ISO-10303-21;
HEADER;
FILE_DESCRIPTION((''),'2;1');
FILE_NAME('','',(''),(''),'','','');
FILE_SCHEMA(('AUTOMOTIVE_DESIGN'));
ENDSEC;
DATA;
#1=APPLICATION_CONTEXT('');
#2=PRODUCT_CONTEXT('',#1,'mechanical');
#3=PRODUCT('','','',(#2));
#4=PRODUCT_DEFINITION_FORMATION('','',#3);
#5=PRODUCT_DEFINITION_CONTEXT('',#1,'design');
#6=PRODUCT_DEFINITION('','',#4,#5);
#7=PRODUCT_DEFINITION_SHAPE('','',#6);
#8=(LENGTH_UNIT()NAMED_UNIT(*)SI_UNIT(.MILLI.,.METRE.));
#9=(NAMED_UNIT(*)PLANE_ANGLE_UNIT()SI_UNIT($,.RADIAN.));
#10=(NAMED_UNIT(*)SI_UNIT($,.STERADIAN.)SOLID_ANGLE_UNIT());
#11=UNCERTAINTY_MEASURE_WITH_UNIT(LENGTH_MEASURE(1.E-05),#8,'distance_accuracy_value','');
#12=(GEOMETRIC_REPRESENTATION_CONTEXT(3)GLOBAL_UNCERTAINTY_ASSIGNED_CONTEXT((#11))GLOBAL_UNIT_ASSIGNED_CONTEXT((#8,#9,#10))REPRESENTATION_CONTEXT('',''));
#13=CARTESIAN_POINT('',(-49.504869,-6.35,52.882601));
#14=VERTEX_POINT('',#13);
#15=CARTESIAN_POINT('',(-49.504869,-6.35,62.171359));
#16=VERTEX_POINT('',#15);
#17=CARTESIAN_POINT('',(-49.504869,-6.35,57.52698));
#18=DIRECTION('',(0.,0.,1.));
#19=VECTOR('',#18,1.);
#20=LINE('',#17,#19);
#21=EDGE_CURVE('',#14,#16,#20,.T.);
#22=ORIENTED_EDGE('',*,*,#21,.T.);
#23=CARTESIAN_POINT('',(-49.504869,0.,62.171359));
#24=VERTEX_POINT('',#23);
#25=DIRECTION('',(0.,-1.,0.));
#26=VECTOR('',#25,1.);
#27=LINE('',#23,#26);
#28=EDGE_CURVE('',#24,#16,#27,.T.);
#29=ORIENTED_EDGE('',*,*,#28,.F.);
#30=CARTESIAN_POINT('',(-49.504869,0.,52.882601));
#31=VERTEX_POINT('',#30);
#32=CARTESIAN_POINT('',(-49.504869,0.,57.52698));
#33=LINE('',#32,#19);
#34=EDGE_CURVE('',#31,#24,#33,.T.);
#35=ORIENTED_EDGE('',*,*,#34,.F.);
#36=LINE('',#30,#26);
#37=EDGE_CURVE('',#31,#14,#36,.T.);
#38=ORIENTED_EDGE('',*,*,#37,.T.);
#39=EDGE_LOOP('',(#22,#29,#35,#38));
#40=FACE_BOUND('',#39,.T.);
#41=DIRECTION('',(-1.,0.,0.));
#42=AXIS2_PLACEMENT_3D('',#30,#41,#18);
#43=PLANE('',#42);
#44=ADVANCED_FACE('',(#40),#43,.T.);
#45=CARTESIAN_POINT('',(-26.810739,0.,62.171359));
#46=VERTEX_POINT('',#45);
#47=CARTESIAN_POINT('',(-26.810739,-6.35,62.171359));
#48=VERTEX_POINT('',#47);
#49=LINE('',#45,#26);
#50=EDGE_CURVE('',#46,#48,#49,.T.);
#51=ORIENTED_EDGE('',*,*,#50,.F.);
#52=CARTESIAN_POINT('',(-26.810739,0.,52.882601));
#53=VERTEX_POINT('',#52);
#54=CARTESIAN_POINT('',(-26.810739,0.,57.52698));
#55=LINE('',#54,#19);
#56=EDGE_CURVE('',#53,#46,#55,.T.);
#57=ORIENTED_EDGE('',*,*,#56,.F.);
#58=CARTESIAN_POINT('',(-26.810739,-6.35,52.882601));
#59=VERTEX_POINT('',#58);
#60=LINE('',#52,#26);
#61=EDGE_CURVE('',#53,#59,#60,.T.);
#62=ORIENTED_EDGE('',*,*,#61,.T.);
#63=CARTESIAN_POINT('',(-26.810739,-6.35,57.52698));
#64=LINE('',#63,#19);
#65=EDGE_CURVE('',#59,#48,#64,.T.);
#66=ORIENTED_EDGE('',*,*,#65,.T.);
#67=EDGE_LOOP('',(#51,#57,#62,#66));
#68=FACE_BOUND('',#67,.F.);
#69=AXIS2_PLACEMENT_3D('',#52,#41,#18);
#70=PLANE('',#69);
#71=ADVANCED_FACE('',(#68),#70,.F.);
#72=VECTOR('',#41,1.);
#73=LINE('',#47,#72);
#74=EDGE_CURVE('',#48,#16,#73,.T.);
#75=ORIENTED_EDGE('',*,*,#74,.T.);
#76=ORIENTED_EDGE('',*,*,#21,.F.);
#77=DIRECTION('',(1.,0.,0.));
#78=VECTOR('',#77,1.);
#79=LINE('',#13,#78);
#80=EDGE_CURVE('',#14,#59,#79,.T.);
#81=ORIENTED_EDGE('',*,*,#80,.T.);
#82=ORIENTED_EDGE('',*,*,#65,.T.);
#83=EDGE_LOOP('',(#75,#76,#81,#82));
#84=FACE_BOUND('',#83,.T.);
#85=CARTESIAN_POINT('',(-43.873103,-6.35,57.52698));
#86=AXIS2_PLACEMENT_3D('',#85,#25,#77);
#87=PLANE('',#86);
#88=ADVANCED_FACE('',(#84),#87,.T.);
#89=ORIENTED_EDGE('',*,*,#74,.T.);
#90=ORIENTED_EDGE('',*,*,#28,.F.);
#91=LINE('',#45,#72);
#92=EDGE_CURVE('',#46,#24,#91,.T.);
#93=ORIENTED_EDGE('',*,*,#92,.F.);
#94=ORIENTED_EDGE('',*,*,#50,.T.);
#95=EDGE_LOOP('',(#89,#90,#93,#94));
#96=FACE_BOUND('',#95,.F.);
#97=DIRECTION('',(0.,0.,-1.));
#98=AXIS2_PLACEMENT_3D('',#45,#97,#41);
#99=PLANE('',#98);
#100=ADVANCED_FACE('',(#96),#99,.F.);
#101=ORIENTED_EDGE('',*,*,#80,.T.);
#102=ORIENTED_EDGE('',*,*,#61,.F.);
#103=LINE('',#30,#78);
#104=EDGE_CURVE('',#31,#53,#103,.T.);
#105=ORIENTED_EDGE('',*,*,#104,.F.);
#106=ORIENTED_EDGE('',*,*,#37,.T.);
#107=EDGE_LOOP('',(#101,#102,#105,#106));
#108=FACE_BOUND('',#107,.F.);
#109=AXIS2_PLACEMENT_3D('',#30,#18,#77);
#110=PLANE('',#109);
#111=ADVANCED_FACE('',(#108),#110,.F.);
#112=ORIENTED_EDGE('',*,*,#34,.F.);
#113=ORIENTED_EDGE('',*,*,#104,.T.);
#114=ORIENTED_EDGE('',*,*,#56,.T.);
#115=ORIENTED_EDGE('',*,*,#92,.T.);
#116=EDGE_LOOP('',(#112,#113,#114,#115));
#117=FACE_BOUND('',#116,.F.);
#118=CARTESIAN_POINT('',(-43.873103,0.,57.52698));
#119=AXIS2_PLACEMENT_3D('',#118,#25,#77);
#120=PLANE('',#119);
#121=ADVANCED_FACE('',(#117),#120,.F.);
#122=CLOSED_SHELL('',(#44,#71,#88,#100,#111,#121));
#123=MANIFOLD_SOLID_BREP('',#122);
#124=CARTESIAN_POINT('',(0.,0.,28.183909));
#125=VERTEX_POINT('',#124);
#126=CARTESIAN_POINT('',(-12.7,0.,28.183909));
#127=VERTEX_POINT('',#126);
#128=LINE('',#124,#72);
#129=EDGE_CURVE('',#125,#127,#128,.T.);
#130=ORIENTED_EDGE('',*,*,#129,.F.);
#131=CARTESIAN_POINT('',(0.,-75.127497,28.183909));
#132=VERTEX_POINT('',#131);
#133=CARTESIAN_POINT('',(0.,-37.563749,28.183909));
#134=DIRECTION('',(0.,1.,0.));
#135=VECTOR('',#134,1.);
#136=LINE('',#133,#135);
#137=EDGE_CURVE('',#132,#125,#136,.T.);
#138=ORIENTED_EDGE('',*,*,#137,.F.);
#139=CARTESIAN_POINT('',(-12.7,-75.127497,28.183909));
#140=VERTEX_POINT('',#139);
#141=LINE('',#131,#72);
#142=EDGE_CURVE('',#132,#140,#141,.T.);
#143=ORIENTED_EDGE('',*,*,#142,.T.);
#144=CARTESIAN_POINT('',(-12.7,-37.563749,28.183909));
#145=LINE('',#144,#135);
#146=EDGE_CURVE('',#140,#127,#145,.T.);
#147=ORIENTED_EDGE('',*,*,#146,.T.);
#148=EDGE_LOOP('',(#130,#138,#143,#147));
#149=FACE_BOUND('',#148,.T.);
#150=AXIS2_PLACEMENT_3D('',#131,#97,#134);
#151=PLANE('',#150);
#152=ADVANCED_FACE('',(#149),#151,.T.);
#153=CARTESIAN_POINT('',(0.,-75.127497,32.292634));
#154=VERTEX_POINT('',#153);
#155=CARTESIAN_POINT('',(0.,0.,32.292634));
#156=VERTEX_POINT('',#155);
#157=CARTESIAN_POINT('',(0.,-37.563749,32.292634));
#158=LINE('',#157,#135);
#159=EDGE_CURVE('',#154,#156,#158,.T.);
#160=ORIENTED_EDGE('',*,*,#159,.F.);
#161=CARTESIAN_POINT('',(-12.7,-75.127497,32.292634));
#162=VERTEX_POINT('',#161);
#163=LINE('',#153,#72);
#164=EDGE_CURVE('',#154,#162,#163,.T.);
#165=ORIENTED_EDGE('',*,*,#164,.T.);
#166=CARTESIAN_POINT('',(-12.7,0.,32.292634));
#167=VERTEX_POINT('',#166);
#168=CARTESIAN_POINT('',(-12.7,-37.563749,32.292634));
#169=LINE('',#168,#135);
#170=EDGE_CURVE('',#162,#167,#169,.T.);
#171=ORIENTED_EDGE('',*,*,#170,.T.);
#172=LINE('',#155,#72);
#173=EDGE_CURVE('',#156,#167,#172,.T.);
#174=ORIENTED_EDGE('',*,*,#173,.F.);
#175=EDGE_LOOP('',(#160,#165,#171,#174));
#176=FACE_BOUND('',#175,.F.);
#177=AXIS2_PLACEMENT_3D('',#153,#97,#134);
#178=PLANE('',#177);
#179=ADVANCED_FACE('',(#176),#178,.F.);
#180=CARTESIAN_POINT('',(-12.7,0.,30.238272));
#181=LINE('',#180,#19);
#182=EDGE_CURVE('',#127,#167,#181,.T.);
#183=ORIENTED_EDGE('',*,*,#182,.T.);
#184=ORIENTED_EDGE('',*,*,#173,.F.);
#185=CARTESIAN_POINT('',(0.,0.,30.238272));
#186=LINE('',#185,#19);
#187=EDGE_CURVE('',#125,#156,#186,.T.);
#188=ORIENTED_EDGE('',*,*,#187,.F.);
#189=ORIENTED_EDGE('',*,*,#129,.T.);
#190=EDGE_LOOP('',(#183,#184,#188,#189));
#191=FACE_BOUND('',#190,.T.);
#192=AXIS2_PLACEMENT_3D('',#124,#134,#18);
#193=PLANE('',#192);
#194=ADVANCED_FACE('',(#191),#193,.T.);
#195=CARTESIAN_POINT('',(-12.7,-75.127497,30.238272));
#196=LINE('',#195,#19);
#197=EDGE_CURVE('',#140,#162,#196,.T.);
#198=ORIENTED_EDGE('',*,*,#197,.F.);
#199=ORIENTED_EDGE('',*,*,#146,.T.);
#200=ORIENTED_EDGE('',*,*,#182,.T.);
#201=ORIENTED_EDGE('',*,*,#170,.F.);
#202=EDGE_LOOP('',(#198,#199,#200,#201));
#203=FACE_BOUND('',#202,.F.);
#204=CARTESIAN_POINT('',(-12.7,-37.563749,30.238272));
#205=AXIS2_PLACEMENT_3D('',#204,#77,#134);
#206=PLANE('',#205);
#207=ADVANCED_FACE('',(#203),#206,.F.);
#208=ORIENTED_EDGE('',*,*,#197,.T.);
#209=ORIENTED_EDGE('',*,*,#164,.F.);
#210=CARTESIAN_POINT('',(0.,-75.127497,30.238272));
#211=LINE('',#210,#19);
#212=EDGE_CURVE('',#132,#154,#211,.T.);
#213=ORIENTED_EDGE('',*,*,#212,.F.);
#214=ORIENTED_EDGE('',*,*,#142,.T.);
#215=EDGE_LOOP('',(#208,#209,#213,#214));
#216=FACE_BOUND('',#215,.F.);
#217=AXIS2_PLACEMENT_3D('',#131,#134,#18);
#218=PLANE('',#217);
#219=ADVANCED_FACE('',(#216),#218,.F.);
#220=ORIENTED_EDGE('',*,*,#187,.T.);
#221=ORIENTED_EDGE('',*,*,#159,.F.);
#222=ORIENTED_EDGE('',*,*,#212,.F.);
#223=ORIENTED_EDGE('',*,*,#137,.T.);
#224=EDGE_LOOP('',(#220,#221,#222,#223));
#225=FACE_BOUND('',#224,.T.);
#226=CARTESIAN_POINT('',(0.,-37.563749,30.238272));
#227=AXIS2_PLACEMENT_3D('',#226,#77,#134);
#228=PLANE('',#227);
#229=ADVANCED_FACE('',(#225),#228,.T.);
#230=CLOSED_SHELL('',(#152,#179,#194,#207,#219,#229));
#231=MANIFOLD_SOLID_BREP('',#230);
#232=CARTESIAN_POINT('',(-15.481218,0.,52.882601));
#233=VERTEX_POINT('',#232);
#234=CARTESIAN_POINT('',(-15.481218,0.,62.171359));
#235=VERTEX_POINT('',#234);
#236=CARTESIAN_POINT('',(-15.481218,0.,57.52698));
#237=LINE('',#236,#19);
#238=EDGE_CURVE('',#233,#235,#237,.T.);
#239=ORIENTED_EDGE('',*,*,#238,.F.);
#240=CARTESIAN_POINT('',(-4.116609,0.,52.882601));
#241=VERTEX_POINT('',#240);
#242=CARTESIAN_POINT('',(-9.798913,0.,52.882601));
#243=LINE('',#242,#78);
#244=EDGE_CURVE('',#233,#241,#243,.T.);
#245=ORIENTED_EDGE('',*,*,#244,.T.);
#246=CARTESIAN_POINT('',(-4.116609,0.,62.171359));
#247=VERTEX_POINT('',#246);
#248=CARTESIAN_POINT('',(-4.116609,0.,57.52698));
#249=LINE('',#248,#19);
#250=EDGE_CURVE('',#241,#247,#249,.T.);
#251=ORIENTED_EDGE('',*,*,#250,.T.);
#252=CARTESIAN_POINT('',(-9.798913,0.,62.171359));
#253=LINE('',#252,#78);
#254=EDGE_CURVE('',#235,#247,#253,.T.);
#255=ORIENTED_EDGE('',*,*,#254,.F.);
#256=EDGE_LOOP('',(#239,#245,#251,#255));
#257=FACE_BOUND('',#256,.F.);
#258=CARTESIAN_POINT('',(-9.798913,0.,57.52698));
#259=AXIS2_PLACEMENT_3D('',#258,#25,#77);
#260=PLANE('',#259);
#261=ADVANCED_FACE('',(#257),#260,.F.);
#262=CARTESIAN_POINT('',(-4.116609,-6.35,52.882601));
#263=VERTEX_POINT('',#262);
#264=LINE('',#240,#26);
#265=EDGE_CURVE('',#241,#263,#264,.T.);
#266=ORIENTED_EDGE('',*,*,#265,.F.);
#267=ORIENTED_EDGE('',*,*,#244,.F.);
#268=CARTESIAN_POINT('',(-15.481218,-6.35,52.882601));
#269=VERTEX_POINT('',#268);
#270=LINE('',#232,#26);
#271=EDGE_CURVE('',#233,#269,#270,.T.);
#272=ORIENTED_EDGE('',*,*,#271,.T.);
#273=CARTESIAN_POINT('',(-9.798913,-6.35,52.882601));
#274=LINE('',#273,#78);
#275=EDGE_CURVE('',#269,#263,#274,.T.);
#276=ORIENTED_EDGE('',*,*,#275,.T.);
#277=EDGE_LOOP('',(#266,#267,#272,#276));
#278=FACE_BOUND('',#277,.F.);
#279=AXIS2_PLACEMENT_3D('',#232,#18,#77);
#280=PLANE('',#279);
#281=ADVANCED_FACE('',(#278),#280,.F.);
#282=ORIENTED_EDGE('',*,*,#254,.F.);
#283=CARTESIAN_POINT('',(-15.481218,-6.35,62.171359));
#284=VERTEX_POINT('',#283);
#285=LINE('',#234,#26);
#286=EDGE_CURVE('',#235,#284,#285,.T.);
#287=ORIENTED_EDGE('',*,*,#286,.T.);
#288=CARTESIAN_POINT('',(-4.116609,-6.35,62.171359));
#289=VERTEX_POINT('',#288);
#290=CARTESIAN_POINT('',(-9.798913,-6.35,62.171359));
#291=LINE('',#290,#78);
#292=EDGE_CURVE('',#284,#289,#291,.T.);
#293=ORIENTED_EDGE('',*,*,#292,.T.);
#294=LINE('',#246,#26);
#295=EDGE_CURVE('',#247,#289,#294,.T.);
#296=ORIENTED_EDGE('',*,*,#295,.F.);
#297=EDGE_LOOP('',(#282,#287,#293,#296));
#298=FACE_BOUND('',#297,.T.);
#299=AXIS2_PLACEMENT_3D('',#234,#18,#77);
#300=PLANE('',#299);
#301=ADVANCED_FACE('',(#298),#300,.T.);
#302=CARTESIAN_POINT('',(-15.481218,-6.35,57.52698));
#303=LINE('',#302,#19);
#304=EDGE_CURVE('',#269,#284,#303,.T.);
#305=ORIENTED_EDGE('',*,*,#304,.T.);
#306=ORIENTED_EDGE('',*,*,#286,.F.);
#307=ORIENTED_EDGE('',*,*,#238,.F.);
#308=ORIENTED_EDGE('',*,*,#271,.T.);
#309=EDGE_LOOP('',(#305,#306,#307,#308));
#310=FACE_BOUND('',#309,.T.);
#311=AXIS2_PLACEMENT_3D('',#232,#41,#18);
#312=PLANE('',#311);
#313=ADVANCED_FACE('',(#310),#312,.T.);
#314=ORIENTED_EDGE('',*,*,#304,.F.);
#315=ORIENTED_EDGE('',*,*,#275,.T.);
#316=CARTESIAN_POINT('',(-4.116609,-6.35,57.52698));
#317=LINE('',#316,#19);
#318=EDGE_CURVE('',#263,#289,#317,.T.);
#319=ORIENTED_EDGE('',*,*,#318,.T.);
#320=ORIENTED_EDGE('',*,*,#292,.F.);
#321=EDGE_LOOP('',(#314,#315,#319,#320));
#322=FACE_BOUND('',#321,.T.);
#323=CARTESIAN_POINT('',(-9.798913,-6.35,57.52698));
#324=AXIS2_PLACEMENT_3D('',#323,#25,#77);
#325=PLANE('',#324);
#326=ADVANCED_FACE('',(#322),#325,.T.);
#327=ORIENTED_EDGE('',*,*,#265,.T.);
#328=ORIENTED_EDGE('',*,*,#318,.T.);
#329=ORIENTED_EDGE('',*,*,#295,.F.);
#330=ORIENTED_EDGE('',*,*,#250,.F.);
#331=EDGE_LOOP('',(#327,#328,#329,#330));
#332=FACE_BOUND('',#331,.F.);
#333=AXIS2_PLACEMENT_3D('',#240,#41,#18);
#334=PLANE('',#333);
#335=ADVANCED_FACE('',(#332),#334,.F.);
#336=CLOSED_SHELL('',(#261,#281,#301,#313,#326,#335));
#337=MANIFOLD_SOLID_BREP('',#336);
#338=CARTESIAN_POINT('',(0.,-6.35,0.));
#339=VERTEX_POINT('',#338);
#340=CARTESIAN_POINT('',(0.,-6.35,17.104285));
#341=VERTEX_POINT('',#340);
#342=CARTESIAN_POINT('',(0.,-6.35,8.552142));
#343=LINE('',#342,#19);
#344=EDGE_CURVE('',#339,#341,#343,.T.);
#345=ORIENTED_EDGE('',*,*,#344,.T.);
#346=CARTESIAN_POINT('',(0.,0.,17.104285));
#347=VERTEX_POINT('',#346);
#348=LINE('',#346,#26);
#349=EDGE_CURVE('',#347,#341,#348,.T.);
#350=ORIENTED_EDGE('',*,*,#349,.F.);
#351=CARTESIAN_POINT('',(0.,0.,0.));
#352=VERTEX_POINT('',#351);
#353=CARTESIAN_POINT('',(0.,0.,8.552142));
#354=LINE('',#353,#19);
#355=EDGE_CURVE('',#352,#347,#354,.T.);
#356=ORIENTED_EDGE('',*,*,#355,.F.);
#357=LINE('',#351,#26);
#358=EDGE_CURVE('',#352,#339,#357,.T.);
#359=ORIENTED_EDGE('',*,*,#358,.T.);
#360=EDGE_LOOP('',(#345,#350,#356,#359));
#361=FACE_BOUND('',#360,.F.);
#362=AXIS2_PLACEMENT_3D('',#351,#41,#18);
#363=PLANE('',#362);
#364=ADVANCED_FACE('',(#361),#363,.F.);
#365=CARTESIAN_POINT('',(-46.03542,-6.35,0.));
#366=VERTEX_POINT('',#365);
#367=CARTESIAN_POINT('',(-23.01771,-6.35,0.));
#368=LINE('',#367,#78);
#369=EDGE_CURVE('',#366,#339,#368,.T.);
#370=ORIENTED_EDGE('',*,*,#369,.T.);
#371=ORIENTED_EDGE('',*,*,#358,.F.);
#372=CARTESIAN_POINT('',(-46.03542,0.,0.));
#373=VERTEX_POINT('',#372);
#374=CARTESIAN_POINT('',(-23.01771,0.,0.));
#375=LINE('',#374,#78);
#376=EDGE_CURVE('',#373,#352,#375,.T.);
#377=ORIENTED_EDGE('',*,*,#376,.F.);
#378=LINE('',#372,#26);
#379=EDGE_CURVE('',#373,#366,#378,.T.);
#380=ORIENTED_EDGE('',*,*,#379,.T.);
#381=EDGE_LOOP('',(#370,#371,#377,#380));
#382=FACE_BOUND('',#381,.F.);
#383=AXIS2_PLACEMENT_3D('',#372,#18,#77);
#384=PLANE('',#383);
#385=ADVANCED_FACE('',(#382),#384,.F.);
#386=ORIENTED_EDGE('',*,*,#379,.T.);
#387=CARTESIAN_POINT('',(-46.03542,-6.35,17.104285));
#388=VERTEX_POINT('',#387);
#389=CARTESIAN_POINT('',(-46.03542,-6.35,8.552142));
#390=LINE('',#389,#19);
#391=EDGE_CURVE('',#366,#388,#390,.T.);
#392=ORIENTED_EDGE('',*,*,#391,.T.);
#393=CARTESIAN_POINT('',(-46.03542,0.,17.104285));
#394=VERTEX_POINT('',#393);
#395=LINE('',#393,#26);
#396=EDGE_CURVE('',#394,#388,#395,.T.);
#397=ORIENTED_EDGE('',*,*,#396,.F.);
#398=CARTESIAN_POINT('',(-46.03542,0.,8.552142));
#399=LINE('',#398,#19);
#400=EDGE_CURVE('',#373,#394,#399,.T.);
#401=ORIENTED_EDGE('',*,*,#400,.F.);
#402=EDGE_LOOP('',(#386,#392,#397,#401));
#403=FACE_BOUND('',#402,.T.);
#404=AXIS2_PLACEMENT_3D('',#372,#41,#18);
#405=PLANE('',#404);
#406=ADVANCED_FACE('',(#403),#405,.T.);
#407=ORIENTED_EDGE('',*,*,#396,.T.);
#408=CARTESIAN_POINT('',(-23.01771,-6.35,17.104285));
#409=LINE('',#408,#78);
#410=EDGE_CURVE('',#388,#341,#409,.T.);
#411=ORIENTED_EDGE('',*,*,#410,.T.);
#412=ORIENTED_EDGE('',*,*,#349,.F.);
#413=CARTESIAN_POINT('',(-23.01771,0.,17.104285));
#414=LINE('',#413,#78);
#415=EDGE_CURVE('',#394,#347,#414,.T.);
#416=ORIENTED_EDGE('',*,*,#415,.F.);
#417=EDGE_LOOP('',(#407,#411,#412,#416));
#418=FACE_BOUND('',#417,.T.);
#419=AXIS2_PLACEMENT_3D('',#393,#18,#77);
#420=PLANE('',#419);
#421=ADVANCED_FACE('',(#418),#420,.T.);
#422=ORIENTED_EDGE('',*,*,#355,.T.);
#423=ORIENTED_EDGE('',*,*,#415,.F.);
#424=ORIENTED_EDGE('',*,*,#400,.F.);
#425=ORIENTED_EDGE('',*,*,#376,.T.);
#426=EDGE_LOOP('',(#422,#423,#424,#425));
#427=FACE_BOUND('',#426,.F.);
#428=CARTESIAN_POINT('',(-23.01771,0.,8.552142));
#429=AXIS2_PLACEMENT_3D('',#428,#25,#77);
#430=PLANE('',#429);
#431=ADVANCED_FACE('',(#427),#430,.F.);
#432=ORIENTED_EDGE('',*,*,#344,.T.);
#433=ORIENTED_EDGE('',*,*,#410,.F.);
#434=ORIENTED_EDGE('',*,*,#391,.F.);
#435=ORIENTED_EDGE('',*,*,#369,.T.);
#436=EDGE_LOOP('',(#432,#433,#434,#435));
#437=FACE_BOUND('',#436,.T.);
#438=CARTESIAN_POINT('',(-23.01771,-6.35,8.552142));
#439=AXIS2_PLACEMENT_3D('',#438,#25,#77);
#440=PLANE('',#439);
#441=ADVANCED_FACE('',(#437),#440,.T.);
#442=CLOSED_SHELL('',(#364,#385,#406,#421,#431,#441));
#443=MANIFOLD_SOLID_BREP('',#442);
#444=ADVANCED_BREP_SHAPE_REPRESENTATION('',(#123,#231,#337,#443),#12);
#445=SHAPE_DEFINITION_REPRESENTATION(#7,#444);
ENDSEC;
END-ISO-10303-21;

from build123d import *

# Parameters (mm, degrees)
F0_W     = 11.2635307014
F0_H     = 9.2887580395
F0_W_2   = 11.4305992611
F1_DEPTH = 6.35
F0_W_3   = 11.3646090031
F2_W     = 75.1274973154
F2_H     = 4.1087251157
F3_DEPTH = 12.7
F5_W     = 46.0354201496
F5_H     = 17.1042848378
F6_DEPTH = 6.35


# Not quite as in the source:
# - the program builds the solid bodies; features that only make, move or delete a surface that nothing else refers to are left out


with BuildPart() as f1:
    # F0 (on Front) → F1 (new body)
    with BuildSketch(Plane.XZ):
        with Locations((-43.8731033355, 57.5269795954)):
            Rectangle(F0_W, F0_H)
        with Locations((-32.5260383543, 57.5269795954)):
            Rectangle(F0_W_2, F0_H)
    extrude(amount=F1_DEPTH)


with BuildPart() as f1b:
    # F0 (on Front) → F1, piece 2 (new body)
    with BuildSketch(Plane.XZ):
        with Locations((-9.7989132628, 57.5269795954)):
            Rectangle(F0_W_3, F0_H)
    extrude(amount=F1_DEPTH)


with BuildPart() as f3:
    # F2 (on Right) → F3 (new body)
    with BuildSketch(Plane.YZ):
        with Locations((-37.5637486577, 30.2382716909)):
            Rectangle(F2_W, F2_H)
    extrude(amount=-F3_DEPTH)


with BuildPart() as f6:
    # F5 (on Front) → F6 (new body)
    with BuildSketch(Plane.XZ):
        with Locations((-23.0177100748, 8.5521424189)):
            Rectangle(F5_W, F5_H)
    extrude(amount=F6_DEPTH)


solid = Compound([f1.part, f1b.part, f3.part, f6.part])
